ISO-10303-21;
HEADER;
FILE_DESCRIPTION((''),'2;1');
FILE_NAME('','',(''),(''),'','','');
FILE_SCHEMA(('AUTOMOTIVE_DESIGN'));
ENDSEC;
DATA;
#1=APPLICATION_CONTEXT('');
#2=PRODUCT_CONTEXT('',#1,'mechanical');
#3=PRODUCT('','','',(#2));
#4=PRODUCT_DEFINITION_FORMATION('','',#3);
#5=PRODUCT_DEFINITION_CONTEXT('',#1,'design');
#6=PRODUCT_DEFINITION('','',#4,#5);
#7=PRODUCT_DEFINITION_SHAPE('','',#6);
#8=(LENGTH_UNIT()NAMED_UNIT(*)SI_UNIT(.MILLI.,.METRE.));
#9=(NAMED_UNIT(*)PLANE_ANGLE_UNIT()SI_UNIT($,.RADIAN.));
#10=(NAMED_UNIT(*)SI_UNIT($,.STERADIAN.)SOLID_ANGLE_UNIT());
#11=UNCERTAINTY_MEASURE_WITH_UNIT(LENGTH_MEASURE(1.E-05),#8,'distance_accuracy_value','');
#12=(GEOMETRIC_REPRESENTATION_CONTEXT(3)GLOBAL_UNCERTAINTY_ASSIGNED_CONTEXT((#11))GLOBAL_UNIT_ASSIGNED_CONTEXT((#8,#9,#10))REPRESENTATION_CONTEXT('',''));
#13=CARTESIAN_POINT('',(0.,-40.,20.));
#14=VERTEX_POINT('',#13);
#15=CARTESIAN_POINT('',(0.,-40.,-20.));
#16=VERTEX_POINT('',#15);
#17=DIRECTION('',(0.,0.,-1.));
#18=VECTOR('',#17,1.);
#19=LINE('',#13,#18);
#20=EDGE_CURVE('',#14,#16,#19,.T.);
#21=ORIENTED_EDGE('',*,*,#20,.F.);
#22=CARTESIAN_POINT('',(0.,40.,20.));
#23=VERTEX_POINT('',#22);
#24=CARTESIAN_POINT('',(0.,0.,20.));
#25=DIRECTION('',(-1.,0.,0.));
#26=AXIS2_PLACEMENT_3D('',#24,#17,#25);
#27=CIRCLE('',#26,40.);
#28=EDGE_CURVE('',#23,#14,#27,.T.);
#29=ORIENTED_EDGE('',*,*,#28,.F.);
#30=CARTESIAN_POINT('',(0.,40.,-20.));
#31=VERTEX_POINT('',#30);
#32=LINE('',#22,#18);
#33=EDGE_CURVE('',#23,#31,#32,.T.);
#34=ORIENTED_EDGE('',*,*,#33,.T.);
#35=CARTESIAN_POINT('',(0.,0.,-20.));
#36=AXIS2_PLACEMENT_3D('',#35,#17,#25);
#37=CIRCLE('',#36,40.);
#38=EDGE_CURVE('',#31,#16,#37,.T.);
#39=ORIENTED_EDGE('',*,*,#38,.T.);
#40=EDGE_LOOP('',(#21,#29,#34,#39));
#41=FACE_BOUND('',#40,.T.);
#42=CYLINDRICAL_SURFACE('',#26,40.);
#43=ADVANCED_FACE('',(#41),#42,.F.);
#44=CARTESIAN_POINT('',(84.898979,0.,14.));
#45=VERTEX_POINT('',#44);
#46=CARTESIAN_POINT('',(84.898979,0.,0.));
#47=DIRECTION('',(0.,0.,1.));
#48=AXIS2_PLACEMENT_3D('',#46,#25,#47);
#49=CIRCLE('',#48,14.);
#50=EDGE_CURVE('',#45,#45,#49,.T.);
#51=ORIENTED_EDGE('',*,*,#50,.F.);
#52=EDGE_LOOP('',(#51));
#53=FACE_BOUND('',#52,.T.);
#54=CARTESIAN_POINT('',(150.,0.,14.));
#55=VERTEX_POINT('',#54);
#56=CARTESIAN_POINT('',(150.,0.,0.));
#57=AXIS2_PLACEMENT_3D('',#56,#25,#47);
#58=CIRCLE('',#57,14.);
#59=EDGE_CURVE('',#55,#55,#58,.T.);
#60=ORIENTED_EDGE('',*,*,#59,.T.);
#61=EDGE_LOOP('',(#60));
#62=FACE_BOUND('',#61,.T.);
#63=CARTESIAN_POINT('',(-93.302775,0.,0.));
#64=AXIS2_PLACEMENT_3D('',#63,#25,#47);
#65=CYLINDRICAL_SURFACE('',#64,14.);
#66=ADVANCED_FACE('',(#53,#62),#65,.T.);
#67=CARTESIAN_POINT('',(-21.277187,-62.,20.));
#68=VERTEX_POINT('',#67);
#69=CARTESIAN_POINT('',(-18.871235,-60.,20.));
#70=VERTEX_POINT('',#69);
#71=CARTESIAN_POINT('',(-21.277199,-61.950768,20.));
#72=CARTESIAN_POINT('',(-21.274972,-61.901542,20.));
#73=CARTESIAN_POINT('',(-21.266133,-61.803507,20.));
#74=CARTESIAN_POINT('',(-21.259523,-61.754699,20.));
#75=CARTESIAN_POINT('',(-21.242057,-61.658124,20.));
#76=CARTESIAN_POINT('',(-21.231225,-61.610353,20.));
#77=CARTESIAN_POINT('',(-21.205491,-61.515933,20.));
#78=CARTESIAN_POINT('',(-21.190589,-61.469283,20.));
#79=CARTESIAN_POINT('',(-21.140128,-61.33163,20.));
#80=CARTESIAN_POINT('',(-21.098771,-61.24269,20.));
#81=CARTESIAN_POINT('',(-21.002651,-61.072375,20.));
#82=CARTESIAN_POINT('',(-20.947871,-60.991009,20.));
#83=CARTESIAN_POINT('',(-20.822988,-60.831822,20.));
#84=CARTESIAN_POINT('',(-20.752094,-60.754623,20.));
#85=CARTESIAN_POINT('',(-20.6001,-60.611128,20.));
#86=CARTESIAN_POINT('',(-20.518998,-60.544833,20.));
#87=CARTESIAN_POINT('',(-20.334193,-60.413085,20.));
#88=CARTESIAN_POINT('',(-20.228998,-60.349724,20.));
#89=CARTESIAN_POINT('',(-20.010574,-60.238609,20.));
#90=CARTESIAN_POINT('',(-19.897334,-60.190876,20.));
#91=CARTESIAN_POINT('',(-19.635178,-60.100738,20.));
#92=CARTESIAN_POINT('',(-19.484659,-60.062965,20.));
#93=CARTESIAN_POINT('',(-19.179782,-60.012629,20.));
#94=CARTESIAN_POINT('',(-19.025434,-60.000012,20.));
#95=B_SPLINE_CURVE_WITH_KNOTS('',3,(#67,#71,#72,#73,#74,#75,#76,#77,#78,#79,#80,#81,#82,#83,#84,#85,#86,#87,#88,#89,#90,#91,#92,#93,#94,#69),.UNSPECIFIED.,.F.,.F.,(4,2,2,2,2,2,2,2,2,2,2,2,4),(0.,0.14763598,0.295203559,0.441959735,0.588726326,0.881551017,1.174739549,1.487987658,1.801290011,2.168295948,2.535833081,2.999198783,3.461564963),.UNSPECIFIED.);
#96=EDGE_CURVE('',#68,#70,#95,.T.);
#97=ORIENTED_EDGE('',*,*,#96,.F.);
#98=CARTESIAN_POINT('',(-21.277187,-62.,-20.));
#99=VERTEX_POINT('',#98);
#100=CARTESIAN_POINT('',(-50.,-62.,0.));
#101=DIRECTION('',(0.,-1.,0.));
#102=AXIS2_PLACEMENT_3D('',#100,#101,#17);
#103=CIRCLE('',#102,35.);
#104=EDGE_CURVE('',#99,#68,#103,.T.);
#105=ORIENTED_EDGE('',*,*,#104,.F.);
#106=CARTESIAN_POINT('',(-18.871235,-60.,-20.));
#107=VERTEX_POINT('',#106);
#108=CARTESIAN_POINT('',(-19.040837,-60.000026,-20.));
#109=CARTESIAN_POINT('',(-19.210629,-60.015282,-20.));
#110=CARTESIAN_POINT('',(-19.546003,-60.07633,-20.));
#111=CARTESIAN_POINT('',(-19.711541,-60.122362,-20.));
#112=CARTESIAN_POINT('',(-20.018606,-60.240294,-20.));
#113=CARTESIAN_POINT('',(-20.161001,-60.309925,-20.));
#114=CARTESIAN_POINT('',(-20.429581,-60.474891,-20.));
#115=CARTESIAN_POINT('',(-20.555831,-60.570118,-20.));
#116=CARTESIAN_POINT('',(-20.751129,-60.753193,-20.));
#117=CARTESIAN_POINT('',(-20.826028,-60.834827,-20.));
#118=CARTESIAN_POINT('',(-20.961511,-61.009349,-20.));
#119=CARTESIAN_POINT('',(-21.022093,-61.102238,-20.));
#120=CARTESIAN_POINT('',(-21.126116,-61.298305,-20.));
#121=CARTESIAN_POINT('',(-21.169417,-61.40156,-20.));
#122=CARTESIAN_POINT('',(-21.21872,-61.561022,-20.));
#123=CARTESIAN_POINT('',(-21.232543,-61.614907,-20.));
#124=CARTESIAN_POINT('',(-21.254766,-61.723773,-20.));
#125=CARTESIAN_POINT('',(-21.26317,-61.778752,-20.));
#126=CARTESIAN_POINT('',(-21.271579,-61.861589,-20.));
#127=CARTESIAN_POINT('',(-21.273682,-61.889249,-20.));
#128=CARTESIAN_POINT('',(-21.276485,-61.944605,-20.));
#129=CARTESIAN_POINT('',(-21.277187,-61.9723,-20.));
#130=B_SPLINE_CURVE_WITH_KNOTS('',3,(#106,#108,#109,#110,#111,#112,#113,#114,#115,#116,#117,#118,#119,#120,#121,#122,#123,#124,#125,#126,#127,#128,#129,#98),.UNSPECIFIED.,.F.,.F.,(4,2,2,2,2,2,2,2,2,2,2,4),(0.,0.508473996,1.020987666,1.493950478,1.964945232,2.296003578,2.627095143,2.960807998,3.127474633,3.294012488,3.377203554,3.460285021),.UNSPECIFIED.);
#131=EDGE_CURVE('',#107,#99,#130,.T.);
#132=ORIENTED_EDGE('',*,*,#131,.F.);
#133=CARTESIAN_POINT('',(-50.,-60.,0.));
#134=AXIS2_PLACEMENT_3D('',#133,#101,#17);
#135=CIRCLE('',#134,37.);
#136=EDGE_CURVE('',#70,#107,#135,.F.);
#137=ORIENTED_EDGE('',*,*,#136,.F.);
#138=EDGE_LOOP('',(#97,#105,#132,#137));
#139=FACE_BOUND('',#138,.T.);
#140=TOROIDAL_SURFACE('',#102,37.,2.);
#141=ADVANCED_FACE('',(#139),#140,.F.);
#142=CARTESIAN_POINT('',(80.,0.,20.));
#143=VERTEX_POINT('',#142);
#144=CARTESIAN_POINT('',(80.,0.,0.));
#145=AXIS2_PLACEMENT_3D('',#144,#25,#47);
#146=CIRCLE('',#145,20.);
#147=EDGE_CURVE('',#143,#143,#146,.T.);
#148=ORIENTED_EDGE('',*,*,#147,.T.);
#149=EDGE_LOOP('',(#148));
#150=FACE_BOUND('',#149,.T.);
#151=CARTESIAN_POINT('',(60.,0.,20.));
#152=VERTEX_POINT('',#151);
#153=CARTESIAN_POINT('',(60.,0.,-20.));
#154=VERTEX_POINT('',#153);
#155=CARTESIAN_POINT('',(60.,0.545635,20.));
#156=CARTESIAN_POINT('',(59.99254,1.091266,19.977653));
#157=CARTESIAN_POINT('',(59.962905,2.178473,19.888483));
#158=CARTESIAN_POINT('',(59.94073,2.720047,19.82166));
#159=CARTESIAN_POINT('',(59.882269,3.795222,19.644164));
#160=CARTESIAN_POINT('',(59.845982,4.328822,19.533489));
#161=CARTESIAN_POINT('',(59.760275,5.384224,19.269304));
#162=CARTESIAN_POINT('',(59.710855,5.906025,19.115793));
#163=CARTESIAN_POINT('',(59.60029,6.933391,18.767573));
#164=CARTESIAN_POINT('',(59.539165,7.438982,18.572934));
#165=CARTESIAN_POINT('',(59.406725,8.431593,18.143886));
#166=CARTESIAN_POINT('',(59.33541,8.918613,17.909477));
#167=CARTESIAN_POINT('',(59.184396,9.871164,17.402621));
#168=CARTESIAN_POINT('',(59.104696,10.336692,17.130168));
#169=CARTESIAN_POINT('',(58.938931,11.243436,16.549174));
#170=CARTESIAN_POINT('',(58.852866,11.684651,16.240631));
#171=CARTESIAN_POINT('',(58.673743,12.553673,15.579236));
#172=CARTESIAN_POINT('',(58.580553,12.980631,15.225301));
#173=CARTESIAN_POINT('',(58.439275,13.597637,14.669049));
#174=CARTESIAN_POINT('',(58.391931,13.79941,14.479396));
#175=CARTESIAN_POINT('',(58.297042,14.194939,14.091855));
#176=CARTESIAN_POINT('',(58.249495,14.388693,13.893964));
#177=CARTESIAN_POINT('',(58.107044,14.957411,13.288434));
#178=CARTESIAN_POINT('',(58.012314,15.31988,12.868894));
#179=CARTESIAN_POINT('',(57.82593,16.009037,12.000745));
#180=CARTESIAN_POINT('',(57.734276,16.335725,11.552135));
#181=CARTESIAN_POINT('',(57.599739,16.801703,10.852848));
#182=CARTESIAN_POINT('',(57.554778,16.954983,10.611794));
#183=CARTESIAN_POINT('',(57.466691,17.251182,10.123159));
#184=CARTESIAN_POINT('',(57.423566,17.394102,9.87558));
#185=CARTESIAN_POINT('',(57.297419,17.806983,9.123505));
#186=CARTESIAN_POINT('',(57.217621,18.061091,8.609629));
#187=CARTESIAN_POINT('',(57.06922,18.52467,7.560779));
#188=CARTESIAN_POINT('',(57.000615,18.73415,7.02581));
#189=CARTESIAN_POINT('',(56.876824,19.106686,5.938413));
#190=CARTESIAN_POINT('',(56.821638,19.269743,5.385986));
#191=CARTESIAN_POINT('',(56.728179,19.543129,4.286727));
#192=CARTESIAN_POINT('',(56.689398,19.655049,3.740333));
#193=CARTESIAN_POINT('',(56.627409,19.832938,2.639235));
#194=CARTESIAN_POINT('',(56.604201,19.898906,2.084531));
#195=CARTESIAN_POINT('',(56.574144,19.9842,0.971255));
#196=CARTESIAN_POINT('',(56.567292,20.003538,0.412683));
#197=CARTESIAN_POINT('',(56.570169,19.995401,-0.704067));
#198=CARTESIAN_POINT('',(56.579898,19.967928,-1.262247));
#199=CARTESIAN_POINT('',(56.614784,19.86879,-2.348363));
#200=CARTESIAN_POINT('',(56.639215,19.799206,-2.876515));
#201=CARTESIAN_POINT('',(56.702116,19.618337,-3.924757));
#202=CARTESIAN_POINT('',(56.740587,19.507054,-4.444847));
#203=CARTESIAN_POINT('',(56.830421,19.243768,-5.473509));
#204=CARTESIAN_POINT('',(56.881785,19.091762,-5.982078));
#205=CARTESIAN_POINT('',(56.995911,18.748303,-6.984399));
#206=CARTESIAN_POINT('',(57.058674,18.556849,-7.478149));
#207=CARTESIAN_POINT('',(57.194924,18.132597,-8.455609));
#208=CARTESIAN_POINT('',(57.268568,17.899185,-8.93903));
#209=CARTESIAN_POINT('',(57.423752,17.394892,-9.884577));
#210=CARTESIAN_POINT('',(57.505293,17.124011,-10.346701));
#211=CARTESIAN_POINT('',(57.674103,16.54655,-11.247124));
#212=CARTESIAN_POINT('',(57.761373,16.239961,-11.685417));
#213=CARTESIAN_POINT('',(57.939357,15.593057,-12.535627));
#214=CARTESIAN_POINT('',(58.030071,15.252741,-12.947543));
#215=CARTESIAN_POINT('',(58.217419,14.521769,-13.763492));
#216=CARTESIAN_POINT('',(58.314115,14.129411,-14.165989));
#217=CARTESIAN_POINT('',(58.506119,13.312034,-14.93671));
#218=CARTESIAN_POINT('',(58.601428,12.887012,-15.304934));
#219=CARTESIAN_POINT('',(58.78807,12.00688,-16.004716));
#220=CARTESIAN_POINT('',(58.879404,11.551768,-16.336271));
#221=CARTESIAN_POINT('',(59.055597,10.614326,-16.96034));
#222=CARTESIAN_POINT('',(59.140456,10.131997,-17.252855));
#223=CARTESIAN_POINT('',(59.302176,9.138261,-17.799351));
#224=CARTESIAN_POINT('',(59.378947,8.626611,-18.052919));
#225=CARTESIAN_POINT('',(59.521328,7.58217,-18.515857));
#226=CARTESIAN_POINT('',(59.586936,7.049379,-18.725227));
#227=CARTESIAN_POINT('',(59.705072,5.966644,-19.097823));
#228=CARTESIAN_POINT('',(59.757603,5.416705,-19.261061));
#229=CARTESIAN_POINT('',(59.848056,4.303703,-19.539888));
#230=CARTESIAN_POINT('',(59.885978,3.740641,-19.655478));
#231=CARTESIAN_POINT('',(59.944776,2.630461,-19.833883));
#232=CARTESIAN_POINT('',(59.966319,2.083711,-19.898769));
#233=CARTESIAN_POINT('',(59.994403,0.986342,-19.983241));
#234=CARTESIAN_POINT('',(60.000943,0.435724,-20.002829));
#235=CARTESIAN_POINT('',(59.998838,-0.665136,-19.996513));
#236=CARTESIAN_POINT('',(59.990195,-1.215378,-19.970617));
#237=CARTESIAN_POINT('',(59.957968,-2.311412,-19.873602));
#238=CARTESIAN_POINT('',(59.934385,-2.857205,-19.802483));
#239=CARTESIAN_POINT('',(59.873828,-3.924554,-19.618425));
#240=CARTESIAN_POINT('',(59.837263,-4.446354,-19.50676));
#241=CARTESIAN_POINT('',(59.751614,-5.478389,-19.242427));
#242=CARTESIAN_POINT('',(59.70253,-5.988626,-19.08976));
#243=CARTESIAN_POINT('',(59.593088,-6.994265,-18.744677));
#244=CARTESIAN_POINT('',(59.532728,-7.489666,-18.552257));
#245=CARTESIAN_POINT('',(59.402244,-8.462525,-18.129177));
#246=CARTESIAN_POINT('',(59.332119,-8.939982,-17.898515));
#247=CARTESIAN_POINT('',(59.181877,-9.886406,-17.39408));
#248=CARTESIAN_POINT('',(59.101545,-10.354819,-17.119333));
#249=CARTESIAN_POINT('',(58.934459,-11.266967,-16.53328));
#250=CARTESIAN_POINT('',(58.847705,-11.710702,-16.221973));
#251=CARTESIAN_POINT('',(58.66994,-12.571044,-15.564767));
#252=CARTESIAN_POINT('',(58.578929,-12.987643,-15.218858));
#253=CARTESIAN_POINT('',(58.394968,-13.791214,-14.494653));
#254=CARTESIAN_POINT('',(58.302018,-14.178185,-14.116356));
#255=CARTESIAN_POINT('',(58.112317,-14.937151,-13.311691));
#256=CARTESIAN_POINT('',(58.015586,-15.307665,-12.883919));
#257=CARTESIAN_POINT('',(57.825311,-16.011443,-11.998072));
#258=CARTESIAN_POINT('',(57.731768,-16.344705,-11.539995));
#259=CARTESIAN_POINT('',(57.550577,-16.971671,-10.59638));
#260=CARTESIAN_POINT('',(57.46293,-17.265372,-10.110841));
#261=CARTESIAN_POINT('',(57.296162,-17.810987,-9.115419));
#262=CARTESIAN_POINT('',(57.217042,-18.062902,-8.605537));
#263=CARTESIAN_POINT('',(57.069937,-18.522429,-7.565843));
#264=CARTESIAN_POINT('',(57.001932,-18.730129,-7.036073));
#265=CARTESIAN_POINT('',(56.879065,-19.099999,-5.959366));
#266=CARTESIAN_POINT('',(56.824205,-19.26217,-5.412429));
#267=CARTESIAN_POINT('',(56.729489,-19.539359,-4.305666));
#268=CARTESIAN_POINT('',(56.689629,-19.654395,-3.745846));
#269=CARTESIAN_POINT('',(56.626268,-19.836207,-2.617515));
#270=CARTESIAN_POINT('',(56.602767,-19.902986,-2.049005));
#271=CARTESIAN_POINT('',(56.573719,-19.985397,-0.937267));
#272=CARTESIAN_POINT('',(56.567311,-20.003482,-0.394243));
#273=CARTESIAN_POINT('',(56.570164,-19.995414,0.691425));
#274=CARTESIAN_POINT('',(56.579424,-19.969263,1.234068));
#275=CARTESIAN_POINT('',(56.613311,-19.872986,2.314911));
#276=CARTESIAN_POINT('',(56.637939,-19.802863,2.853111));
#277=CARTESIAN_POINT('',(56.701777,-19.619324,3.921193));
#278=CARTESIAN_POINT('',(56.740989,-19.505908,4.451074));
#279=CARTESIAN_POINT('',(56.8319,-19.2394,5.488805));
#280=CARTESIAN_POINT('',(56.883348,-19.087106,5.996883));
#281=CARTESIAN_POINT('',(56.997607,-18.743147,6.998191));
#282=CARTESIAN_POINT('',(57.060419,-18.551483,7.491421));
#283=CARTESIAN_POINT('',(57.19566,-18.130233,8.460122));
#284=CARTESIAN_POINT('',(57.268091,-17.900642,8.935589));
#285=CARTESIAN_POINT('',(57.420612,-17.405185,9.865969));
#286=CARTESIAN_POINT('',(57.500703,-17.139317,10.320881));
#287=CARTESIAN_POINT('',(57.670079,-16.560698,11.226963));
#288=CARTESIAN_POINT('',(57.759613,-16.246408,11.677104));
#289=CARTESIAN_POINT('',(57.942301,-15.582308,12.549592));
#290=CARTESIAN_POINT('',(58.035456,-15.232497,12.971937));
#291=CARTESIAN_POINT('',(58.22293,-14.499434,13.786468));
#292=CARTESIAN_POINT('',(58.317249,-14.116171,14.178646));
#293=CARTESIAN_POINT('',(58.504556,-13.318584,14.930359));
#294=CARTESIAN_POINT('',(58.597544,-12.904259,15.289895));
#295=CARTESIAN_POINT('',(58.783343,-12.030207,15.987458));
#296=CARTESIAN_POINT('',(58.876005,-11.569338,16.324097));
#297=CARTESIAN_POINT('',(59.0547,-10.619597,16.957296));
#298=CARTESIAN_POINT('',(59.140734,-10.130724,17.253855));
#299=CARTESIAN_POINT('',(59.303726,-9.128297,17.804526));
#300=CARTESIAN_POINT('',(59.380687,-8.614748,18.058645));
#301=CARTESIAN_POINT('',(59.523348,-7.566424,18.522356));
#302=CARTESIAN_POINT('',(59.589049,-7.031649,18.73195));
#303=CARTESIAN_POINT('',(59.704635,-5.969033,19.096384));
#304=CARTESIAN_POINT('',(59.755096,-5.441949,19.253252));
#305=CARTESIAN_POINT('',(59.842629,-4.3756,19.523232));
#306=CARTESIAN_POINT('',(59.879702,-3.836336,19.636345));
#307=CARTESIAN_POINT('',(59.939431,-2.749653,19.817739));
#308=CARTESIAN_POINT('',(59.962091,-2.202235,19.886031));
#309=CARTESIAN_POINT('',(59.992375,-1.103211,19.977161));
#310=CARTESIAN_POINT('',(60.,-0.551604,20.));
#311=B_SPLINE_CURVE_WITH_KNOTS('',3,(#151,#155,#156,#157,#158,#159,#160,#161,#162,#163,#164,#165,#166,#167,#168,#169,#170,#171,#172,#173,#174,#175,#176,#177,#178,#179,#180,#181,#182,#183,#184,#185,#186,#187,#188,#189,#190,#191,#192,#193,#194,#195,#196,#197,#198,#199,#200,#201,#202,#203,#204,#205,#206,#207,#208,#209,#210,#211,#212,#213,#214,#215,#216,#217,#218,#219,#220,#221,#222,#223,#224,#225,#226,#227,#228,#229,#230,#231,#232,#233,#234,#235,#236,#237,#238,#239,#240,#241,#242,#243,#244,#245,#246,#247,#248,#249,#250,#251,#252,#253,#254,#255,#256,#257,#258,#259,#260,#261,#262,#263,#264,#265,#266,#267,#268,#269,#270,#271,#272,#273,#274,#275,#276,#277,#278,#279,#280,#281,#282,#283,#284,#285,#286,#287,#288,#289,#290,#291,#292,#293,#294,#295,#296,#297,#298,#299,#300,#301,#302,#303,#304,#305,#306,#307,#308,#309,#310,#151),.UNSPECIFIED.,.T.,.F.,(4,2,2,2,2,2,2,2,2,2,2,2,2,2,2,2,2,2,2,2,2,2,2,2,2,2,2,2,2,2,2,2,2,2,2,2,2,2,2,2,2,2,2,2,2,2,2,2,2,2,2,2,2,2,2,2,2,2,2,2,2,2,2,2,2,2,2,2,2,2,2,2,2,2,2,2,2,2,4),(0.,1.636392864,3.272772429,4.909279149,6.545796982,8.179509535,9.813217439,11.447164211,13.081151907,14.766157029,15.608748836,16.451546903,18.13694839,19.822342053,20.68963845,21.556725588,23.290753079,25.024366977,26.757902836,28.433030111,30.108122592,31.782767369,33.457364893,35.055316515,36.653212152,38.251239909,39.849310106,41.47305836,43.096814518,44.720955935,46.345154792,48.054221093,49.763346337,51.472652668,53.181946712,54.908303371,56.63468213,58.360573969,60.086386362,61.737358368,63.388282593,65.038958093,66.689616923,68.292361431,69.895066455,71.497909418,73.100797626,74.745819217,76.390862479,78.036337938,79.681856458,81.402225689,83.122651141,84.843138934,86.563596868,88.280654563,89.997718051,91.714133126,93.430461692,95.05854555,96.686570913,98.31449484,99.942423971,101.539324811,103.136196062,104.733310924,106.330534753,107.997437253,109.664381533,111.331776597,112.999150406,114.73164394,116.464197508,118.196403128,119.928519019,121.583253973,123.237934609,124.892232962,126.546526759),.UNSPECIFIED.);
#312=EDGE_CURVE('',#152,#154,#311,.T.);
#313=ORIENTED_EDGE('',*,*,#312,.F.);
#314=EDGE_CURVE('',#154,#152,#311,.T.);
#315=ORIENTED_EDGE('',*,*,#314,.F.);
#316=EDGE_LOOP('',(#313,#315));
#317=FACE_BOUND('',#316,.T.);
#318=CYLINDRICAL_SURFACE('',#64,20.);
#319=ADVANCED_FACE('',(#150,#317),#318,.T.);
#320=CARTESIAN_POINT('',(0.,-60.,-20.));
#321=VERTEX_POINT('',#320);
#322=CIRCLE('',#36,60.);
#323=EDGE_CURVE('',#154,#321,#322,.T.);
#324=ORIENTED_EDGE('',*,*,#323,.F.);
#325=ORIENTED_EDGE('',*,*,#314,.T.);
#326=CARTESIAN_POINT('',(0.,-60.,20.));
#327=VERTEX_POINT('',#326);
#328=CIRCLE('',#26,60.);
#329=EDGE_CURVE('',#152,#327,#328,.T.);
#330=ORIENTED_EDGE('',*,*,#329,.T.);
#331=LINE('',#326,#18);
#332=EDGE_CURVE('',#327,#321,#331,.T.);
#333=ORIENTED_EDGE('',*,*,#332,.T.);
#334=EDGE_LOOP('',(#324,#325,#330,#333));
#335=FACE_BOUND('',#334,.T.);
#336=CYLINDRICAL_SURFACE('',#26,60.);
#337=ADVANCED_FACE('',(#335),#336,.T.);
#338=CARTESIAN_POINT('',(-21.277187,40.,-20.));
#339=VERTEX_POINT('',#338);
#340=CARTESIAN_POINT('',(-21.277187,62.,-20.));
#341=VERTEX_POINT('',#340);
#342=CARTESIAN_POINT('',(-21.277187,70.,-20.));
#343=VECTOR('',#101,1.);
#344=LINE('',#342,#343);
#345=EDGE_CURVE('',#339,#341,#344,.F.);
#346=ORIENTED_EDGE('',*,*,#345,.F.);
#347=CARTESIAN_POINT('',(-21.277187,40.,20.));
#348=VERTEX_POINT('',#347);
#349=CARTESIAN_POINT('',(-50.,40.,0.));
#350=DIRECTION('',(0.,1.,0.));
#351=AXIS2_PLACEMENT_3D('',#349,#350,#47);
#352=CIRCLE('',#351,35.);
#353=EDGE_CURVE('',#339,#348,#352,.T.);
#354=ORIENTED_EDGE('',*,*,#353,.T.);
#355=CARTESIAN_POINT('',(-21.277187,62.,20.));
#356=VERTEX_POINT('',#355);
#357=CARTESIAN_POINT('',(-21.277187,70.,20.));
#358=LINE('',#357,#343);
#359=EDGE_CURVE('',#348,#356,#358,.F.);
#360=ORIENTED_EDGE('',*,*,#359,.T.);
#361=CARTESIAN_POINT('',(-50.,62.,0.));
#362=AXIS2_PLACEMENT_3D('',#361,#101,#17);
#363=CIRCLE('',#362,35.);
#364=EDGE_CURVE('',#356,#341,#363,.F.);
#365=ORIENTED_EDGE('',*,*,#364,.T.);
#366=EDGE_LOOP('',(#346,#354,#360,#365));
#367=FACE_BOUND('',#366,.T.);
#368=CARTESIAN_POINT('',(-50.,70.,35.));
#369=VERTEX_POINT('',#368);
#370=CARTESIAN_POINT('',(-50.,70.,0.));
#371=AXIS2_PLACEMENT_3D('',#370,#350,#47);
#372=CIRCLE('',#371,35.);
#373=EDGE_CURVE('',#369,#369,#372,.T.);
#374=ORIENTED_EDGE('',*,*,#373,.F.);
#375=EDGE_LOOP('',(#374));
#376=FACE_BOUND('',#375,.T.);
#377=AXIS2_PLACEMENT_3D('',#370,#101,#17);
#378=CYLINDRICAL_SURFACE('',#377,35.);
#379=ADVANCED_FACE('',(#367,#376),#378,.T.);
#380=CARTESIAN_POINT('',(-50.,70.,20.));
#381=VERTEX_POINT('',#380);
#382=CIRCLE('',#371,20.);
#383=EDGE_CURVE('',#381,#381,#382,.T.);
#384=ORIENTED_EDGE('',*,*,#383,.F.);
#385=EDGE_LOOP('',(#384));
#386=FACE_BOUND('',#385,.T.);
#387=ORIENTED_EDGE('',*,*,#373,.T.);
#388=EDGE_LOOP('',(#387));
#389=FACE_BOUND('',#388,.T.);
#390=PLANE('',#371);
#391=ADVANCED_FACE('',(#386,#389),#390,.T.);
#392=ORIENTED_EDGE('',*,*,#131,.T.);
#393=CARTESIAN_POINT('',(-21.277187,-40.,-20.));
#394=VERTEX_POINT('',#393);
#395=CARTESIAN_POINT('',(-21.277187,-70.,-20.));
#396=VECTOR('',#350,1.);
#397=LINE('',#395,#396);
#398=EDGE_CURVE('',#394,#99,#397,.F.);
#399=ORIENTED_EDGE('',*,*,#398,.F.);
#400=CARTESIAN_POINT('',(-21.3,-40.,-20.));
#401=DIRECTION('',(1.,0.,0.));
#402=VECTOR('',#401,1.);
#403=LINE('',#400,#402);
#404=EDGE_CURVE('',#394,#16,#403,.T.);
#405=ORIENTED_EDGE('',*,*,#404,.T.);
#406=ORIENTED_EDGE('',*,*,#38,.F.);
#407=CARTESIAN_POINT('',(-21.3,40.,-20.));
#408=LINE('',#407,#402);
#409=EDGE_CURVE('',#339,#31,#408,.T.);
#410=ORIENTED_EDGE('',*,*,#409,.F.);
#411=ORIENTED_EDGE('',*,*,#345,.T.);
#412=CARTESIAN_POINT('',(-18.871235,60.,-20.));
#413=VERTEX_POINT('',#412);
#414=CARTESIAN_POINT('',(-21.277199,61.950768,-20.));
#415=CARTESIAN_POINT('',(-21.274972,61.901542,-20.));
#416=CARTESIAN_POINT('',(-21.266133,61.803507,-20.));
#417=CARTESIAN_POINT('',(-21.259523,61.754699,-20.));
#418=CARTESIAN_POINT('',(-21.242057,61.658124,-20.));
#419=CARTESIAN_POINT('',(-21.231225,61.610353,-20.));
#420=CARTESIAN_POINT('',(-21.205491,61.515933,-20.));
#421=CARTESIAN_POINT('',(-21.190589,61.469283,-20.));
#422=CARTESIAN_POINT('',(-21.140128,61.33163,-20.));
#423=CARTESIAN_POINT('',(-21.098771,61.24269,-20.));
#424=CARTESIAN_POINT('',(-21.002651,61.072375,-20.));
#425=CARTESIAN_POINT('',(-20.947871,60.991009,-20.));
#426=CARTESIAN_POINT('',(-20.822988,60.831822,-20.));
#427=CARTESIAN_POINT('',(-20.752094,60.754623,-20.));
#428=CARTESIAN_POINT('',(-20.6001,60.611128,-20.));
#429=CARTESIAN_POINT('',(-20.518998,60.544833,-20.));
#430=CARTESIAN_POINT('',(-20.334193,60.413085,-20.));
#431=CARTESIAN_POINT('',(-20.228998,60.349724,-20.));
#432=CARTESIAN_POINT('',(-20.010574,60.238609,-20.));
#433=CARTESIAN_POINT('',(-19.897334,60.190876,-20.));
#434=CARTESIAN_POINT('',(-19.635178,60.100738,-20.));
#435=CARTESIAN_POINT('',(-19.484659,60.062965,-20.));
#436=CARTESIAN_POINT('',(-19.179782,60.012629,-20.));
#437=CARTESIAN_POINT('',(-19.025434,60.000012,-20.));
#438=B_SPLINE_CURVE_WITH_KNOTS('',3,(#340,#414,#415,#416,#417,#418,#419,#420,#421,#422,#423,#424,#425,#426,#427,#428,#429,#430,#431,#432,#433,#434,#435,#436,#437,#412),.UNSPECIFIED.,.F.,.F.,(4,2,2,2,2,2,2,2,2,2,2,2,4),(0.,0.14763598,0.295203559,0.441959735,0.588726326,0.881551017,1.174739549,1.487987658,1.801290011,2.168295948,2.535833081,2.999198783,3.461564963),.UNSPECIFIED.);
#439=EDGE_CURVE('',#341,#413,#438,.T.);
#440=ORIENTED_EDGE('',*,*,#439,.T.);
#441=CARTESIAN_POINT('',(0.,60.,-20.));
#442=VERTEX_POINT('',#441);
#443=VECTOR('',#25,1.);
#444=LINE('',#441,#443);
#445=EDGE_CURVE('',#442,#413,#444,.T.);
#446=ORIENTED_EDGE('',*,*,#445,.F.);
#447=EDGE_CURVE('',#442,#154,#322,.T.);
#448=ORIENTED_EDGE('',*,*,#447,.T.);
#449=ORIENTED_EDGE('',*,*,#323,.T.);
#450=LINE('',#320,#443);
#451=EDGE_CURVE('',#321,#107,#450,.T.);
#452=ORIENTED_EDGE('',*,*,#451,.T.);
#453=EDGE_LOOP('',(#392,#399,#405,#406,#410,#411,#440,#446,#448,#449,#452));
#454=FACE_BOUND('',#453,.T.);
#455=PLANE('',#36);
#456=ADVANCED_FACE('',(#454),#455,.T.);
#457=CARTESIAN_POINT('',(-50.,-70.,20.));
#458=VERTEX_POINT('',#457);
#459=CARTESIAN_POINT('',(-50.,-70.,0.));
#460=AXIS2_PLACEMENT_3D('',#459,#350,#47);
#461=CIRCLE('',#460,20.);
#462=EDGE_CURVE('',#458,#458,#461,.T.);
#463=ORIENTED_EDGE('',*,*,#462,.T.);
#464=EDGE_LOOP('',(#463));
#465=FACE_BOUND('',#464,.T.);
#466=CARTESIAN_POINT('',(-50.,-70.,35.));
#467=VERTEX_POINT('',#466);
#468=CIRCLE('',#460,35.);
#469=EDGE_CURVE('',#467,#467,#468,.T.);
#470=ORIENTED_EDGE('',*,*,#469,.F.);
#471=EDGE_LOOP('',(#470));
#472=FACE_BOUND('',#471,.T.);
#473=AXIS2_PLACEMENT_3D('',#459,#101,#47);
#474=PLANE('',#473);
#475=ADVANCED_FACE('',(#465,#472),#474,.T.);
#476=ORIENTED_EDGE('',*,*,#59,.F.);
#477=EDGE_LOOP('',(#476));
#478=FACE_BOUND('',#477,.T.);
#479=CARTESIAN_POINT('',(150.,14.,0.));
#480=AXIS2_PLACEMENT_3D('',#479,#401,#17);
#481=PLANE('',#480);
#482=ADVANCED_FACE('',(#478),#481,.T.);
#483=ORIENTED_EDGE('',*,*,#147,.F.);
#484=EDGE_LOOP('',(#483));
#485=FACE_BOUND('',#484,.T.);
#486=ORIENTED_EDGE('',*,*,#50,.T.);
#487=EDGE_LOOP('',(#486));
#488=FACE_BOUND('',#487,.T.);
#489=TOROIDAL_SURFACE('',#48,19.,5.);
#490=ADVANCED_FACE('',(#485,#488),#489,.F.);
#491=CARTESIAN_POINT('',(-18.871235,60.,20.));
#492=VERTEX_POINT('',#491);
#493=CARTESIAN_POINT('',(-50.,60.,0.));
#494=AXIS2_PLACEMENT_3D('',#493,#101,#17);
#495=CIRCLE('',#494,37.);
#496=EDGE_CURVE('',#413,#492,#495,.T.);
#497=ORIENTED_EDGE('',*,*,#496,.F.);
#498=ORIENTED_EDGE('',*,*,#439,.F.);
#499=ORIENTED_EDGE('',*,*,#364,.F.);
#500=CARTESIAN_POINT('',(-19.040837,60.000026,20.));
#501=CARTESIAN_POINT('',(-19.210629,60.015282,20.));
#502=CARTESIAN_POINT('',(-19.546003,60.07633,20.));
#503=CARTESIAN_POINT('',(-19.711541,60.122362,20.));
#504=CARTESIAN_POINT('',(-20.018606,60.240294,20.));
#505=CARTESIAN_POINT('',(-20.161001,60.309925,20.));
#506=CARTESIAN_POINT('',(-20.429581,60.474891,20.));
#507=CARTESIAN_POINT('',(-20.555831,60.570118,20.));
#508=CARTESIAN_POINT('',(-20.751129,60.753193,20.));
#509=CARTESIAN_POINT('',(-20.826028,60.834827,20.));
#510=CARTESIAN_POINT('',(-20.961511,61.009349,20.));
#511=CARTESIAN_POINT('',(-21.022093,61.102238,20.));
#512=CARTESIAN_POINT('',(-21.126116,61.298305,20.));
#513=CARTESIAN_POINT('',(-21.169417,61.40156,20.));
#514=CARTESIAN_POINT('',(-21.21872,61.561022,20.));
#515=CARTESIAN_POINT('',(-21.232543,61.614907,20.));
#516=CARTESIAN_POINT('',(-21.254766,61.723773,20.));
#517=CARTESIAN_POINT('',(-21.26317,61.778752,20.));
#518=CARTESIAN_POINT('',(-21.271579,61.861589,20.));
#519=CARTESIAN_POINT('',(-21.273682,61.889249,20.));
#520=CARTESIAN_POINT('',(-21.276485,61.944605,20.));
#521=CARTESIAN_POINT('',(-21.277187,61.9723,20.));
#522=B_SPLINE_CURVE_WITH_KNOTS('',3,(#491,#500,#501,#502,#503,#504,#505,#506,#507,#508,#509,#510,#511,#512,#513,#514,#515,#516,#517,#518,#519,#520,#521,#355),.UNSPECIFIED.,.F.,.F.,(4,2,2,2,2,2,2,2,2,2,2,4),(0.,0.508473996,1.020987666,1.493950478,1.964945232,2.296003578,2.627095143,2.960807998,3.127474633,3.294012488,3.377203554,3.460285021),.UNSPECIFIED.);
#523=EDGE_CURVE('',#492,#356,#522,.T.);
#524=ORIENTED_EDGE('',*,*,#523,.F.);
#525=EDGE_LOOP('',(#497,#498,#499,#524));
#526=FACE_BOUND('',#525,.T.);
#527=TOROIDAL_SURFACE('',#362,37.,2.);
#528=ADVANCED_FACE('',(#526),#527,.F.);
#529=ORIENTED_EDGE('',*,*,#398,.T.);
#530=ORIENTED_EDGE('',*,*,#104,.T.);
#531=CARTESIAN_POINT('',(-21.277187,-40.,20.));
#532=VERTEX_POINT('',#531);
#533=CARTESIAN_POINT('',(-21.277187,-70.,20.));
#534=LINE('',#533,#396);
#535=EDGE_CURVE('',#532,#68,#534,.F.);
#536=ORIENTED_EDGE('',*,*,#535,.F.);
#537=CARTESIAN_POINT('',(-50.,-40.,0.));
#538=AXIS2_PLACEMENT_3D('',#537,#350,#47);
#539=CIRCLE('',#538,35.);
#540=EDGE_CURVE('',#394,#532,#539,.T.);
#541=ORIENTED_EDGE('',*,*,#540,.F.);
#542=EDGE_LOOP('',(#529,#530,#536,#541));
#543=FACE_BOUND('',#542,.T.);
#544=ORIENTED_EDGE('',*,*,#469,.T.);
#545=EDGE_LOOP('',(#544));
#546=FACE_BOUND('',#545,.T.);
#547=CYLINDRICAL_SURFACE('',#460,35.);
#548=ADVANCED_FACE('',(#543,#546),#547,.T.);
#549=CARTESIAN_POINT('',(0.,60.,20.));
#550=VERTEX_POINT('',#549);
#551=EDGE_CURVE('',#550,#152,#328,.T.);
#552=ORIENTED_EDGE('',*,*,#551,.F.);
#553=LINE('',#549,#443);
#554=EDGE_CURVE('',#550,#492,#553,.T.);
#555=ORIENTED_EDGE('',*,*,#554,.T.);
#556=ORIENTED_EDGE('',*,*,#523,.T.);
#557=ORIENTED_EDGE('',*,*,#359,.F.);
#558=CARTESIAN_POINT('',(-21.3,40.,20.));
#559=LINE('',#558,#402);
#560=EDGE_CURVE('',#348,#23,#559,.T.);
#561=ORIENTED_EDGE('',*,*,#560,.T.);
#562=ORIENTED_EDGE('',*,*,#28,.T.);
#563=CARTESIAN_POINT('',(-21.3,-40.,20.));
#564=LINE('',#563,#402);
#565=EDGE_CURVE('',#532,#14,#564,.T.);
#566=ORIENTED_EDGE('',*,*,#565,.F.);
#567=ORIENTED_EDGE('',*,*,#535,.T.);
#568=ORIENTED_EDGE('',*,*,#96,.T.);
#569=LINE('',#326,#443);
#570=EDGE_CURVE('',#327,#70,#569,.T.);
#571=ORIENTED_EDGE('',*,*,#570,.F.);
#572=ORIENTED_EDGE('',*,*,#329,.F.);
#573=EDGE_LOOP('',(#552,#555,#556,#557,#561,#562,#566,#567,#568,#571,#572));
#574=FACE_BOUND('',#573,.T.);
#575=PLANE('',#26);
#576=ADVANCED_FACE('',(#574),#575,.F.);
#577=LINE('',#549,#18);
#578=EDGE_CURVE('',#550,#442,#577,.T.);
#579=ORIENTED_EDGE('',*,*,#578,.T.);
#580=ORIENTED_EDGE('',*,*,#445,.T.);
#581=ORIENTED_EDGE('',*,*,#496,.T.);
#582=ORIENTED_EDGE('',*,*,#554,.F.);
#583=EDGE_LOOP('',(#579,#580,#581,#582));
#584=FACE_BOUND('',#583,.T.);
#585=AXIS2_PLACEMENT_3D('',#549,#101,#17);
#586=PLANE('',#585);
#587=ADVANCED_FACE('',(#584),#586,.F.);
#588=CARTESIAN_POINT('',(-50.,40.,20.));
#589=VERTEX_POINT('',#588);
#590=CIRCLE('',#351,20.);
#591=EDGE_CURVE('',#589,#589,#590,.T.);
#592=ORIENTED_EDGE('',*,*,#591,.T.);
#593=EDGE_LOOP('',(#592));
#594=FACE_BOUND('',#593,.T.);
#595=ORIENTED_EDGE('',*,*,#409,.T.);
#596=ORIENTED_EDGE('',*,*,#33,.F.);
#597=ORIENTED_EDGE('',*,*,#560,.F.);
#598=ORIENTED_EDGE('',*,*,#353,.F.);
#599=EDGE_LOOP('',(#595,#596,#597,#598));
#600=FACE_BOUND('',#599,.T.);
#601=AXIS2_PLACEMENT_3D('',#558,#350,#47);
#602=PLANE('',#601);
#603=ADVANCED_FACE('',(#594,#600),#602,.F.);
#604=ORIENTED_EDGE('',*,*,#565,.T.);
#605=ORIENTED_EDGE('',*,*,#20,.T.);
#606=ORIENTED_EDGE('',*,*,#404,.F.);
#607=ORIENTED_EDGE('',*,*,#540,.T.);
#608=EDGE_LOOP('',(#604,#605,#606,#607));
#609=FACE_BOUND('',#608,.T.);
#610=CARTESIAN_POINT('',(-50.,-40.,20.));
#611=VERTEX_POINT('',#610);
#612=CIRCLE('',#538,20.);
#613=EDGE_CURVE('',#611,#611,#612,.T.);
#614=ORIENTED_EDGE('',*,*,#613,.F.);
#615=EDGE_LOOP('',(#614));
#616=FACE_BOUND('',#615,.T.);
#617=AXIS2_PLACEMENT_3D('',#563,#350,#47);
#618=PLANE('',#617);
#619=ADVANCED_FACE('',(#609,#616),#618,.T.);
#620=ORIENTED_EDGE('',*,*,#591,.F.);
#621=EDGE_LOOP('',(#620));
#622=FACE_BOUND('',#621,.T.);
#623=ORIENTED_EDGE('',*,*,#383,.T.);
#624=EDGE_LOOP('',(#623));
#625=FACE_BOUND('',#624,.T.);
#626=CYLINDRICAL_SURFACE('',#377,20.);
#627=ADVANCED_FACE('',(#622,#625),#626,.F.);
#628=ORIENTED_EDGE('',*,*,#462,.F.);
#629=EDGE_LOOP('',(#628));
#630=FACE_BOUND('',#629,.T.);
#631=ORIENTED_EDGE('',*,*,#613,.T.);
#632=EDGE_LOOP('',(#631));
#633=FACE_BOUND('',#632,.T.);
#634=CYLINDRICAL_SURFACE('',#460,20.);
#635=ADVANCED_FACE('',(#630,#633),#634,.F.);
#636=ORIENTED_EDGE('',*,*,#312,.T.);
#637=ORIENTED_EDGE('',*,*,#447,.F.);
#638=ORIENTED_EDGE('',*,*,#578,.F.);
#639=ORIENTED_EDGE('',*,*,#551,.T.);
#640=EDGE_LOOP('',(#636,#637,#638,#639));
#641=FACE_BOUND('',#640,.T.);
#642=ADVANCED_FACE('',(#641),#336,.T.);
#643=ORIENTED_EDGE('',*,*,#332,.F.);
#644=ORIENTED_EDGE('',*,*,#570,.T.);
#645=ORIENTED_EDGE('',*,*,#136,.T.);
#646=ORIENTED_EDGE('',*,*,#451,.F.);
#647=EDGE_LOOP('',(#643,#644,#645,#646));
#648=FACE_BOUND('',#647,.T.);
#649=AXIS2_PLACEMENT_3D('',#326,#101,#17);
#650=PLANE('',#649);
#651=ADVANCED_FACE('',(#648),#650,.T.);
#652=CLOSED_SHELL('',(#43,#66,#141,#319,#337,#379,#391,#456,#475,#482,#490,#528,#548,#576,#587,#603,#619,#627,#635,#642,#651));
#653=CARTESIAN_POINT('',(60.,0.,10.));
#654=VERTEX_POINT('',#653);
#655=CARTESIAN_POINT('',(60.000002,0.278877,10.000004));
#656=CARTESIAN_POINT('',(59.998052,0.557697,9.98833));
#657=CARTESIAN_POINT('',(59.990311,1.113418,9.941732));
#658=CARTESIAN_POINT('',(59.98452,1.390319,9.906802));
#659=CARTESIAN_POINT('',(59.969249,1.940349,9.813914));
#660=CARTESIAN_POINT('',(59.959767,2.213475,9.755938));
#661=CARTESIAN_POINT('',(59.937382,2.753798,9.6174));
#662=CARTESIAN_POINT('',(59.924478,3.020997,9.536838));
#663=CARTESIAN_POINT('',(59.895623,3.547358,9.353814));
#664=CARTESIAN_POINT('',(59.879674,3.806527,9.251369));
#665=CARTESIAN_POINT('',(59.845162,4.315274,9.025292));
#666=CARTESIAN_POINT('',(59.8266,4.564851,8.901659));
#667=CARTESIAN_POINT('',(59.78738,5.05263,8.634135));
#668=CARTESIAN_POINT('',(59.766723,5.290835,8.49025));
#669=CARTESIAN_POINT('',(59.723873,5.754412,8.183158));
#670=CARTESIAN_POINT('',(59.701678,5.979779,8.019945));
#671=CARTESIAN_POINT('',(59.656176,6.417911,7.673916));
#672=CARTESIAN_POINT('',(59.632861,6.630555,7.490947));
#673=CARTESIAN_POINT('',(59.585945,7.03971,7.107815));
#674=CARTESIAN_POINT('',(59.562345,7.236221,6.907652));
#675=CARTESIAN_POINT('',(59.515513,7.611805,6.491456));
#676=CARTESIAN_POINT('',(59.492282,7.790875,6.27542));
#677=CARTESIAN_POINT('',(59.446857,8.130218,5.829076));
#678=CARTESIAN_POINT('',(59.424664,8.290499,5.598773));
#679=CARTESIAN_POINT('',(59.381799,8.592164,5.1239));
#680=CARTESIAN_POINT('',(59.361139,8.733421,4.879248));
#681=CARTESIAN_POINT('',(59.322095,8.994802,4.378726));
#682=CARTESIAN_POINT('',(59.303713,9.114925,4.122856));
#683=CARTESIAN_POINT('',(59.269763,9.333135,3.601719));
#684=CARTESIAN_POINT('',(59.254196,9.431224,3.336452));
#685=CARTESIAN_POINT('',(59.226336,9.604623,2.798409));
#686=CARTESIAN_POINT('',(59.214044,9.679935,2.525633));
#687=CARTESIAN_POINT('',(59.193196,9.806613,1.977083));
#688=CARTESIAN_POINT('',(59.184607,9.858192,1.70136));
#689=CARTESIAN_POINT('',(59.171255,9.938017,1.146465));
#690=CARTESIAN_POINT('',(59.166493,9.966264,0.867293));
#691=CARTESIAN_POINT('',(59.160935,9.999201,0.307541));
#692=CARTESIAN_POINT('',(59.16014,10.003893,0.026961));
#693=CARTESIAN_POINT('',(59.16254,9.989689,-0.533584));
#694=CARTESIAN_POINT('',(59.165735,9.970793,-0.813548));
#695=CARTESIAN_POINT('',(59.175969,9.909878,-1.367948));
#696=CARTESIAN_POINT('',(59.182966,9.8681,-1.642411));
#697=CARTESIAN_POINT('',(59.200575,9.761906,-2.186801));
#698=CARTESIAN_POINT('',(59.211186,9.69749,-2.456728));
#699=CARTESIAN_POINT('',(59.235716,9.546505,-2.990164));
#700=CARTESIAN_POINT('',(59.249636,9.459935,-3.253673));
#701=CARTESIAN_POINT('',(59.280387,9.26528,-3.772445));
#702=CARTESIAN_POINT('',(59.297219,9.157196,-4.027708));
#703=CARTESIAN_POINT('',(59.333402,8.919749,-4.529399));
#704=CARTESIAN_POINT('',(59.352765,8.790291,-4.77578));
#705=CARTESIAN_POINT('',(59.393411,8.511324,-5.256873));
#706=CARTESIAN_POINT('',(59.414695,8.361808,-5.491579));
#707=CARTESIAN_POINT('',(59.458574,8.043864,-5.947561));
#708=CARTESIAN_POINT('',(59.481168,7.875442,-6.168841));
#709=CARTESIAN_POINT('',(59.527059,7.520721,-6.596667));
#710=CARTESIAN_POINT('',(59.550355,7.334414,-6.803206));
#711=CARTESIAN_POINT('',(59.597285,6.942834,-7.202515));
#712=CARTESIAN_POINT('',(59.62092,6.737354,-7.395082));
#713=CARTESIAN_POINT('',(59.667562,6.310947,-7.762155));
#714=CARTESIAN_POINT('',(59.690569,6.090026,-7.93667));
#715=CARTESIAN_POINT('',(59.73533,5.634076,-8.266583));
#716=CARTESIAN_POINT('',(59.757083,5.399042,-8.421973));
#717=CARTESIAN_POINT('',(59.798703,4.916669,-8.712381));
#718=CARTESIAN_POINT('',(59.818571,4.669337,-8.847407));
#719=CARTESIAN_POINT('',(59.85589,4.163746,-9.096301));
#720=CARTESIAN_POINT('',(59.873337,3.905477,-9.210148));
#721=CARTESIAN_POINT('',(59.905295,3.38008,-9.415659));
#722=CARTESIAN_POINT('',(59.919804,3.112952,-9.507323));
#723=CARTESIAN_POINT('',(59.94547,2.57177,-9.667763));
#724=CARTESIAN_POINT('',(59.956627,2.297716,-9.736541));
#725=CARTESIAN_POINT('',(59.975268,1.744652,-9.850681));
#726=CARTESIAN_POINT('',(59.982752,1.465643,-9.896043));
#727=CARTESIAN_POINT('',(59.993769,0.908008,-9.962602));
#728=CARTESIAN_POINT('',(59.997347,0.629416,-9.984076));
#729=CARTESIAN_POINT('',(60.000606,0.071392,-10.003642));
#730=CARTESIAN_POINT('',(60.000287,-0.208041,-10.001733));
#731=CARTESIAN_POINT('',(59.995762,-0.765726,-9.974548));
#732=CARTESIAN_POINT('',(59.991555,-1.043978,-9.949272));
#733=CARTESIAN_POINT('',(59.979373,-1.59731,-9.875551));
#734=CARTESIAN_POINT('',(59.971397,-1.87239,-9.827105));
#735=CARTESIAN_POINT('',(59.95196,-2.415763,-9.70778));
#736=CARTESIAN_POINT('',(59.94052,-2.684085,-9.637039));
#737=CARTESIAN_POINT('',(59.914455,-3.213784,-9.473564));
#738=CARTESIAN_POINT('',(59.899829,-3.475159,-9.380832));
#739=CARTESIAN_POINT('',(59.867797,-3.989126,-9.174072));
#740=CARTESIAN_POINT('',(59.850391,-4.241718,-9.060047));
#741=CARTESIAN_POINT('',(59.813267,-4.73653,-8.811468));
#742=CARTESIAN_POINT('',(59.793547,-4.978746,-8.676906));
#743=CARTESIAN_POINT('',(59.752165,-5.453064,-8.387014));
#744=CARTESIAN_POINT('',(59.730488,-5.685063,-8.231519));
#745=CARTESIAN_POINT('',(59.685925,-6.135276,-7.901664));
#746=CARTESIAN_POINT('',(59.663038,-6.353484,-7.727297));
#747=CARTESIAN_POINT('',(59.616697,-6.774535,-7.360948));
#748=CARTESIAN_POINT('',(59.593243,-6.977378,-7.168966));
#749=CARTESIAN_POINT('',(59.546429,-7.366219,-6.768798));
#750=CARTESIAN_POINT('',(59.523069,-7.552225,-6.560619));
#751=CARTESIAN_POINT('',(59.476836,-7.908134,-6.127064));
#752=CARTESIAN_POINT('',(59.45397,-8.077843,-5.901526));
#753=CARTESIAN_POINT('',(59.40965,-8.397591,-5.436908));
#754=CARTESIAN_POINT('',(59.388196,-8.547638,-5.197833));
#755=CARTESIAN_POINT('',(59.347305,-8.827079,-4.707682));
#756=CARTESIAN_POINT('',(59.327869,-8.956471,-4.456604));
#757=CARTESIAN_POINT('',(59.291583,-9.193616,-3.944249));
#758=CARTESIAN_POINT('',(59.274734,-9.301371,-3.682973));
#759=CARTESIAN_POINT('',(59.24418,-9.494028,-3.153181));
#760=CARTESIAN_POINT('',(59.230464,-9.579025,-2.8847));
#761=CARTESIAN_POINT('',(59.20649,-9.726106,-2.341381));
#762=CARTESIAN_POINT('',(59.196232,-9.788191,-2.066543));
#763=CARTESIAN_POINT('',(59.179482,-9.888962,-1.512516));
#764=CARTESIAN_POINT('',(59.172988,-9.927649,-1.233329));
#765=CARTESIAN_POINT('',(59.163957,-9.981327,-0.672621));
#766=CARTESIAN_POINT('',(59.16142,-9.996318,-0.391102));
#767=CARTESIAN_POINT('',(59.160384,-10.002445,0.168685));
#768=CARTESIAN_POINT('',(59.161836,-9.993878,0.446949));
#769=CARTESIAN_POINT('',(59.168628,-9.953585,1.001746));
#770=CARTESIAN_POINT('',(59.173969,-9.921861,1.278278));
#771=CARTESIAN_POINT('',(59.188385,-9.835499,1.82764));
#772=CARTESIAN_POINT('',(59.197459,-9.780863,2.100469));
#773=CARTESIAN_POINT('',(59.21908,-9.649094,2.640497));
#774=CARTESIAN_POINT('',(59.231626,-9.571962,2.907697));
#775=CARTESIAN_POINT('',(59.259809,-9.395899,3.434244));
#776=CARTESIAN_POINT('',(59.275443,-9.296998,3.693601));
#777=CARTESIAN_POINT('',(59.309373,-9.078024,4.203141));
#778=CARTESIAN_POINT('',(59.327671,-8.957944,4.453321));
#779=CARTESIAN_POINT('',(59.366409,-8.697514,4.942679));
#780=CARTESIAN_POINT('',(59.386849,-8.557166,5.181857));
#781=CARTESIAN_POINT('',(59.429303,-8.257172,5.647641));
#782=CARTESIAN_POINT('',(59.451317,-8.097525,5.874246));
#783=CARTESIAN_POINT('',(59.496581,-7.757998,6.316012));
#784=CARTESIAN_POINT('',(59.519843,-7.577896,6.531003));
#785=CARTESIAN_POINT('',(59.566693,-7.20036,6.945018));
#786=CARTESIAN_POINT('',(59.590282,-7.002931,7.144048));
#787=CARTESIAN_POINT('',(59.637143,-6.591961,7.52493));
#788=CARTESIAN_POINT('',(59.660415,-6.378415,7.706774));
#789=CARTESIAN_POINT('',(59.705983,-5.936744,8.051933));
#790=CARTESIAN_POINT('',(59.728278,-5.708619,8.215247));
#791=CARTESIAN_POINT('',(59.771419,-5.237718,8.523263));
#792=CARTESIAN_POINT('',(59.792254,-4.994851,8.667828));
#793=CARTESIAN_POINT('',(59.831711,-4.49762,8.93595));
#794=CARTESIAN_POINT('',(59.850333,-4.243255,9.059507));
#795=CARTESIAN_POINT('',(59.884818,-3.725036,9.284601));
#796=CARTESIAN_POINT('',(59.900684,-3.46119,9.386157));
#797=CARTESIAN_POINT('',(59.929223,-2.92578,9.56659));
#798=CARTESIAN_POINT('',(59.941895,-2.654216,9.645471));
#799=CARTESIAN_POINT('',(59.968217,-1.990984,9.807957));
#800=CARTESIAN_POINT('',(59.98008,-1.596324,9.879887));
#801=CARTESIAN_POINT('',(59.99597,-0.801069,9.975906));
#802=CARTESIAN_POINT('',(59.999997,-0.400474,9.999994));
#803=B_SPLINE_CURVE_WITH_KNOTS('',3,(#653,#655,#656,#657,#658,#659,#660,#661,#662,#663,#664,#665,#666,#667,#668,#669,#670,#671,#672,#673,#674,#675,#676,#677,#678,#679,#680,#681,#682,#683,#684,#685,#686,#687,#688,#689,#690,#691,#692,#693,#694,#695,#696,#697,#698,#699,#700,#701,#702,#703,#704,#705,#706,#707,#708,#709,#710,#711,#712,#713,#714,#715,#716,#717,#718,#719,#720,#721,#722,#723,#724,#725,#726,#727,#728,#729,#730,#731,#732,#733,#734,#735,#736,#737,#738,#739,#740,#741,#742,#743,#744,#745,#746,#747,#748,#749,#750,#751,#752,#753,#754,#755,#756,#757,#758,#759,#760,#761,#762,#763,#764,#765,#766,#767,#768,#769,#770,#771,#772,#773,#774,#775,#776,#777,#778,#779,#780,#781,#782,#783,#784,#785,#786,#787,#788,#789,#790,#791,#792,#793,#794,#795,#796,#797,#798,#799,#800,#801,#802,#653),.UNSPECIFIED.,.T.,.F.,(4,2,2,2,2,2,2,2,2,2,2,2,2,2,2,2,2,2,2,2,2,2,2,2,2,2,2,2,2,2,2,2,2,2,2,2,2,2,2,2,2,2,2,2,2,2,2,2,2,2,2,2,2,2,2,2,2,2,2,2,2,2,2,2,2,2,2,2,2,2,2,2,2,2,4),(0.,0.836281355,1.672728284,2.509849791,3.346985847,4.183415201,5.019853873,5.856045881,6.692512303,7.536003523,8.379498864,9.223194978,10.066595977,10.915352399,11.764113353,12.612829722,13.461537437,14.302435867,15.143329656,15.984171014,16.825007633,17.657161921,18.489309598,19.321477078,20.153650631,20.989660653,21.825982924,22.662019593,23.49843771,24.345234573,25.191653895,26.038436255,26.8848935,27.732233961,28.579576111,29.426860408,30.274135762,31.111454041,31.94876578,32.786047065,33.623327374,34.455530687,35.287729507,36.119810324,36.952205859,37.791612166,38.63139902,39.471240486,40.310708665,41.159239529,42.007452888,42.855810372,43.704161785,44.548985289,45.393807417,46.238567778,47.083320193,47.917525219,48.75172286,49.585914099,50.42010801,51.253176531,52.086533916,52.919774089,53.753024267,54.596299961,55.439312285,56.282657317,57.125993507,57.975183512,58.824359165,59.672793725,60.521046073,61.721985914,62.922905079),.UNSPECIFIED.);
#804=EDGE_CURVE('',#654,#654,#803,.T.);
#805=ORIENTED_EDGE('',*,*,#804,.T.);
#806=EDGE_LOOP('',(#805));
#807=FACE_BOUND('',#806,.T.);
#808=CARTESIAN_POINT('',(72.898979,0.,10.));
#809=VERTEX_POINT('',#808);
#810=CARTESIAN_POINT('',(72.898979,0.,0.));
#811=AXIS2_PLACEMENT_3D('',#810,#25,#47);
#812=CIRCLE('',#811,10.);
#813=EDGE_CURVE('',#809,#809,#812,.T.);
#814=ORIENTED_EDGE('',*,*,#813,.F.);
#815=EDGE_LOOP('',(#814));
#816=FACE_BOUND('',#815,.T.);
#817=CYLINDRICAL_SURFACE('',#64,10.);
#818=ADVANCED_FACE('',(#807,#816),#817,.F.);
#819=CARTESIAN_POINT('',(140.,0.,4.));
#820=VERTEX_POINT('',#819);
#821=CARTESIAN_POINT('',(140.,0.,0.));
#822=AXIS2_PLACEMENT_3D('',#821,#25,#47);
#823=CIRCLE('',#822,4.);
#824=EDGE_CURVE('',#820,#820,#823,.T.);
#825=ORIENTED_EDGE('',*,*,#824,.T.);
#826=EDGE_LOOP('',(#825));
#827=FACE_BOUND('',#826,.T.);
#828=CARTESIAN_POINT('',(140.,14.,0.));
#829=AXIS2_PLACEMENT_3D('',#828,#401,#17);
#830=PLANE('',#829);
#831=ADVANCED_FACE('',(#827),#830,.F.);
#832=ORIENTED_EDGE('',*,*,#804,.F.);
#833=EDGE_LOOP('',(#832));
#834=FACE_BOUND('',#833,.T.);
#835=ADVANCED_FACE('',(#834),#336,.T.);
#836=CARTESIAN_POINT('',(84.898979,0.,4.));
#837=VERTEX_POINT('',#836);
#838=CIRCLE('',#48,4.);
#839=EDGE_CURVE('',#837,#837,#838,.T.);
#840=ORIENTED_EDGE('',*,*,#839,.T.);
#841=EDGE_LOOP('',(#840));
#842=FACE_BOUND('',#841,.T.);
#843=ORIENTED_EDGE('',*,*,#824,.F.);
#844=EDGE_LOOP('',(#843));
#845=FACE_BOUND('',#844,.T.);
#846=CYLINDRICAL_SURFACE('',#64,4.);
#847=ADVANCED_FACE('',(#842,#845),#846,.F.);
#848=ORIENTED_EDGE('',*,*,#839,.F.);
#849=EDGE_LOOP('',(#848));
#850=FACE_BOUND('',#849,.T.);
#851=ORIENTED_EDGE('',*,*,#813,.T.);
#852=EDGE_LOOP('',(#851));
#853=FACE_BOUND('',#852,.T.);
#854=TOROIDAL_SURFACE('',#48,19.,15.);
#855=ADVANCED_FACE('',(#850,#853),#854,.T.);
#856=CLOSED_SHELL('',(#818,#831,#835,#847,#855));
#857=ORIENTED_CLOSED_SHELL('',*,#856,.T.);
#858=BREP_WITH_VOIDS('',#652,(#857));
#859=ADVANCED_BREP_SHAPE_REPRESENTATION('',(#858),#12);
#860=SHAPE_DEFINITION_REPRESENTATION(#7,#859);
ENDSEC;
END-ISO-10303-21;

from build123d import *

# Parameters (mm, degrees)
BOSS_EXTRUDE1_DEPTH = 20
SKETCH2_R           = 35
SKETCH2_R_2         = 20
BOSS_EXTRUDE2_DEPTH = 30
FILLET1_R           = 2
FILLET2_R           = 2


with BuildPart() as part:
    # Sketch1 → Revolve-Thin1 (revolve)
    with BuildSketch(Plane.XY, mode=Mode.PRIVATE) as revolve_thin1_sk:
        with BuildLine():
            Line((56.568542495, 20), (80, 20))
            ThreePointArc((80, 20), (81.025996139, 15.83772234), (84.898979486, 14))
            Line((84.898979486, 14), (150, 14))
            Line((150, 14), (150, 0))
            Line((150, 0), (140, 0))
            Line((140, 0), (140, 4))
            Line((140, 4), (84.898979486, 4))
            ThreePointArc((84.898979486, 4), (78.190775553, 5.583592135), (72.898979486, 10))
            Line((72.898979486, 10), (56.568542495, 10))
            Line((56.568542495, 10), (56.568542495, 20))
        make_face()
    revolve(revolve_thin1_sk.sketch.rotate(Axis((-93.302775415, 0, 0), (1, 0, 0)), 90), axis=Axis((-93.302775415, 0, 0), (1, 0, 0)))

    # Sketch1<4> → Boss-Extrude1 (add, symmetric)
    with BuildSketch(Plane.XY):
        with BuildLine():
            Line((0, 60), (-21.3, 60))
            Line((-21.3, 60), (-21.3, 40))
            Line((-21.3, 40), (0, 40))
            ThreePointArc((0, 40), (40, 0), (0, -40))
            Line((0, -40), (-21.3, -40))
            Line((-21.3, -40), (-21.3, -60))
            Line((-21.3, -60), (0, -60))
            ThreePointArc((0, -60), (60, 0), (0, 60))
        make_face()
    extrude(amount=BOSS_EXTRUDE1_DEPTH, both=True)

    # Sketch2 → Boss-Extrude2 (add)
    with BuildSketch(Plane(origin=(0, 40, 0), x_dir=(1, 0, 0), z_dir=(0, 1, 0))):
        with Locations(Location((-50, 0, 0), (0, 0, 34.849904579))):
            Circle(SKETCH2_R)
        with Locations(Location((-50, 0, 0), (0, 0, 270))):
            Circle(SKETCH2_R_2, mode=Mode.SUBTRACT)
    boss_extrude2 = extrude(amount=BOSS_EXTRUDE2_DEPTH)

    # Fillet1
    # the kernel refuses this fillet: 2 mm, written as the material it adds along each edge
    with BuildSketch(Plane(origin=(-50, 60, 0), x_dir=(0.7309132797972386, 0, -0.682470349111259), z_dir=(-0.682470349111259, 0, -0.7309132797972386))) as fillet1_piece_1_section:
        with BuildLine():
            CenterArc((35 + FILLET1_R, -FILLET1_R), FILLET1_R, 90, 90)
            Line((35, -FILLET1_R), (35, 0))
            Line((35, 0), (35 + FILLET1_R, 0))
        make_face()
    fillet1_piece_1 = revolve(axis=Axis((-50, 60, 0), (0, -1, 0)), revolution_arc=86.073975491, mode=Mode.PRIVATE)
    fillet1_piece_1 = split(fillet1_piece_1, bisect_by=Plane(origin=(-14.43905365, 60.56094635, -20), z_dir=(0, 0, 1)), keep=Keep.TOP, mode=Mode.PRIVATE)
    fillet1_piece_1 = split(fillet1_piece_1, bisect_by=Plane(origin=(-14.43905365, 60.56094635, 20), z_dir=(0, 0, -1)), keep=Keep.TOP, mode=Mode.PRIVATE)
    add(fillet1_piece_1)

    # Mirror3: Boss-Extrude2 across plane
    add(boss_extrude2.mirror(Plane.ZX))

    # Fillet2
    # the kernel refuses this fillet: 2 mm, written as the material it adds along each edge
    with BuildSketch(Plane(origin=(-50, -60, 0), x_dir=(0.7309132797966846, 0, 0.6824703491118522), z_dir=(-0.6824703491118522, 0, 0.7309132797966846))) as fillet2_piece_1_section:
        with BuildLine():
            CenterArc((35 + FILLET2_R, -FILLET2_R), FILLET2_R, 90, 90)
            Line((35, -FILLET2_R), (35, 0))
            Line((35, 0), (35 + FILLET2_R, 0))
        make_face()
    fillet2_piece_1 = revolve(axis=Axis((-50, -60, 0), (0, 1, 0)), revolution_arc=86.073975491, mode=Mode.PRIVATE)
    fillet2_piece_1 = split(fillet2_piece_1, bisect_by=Plane(origin=(-14.439053646, -60.560946354, -20), z_dir=(0, 0, 1)), keep=Keep.TOP, mode=Mode.PRIVATE)
    fillet2_piece_1 = split(fillet2_piece_1, bisect_by=Plane(origin=(-14.439053646, -60.560946354, 20), z_dir=(0, 0, -1)), keep=Keep.TOP, mode=Mode.PRIVATE)
    add(fillet2_piece_1)


solid = part.part
